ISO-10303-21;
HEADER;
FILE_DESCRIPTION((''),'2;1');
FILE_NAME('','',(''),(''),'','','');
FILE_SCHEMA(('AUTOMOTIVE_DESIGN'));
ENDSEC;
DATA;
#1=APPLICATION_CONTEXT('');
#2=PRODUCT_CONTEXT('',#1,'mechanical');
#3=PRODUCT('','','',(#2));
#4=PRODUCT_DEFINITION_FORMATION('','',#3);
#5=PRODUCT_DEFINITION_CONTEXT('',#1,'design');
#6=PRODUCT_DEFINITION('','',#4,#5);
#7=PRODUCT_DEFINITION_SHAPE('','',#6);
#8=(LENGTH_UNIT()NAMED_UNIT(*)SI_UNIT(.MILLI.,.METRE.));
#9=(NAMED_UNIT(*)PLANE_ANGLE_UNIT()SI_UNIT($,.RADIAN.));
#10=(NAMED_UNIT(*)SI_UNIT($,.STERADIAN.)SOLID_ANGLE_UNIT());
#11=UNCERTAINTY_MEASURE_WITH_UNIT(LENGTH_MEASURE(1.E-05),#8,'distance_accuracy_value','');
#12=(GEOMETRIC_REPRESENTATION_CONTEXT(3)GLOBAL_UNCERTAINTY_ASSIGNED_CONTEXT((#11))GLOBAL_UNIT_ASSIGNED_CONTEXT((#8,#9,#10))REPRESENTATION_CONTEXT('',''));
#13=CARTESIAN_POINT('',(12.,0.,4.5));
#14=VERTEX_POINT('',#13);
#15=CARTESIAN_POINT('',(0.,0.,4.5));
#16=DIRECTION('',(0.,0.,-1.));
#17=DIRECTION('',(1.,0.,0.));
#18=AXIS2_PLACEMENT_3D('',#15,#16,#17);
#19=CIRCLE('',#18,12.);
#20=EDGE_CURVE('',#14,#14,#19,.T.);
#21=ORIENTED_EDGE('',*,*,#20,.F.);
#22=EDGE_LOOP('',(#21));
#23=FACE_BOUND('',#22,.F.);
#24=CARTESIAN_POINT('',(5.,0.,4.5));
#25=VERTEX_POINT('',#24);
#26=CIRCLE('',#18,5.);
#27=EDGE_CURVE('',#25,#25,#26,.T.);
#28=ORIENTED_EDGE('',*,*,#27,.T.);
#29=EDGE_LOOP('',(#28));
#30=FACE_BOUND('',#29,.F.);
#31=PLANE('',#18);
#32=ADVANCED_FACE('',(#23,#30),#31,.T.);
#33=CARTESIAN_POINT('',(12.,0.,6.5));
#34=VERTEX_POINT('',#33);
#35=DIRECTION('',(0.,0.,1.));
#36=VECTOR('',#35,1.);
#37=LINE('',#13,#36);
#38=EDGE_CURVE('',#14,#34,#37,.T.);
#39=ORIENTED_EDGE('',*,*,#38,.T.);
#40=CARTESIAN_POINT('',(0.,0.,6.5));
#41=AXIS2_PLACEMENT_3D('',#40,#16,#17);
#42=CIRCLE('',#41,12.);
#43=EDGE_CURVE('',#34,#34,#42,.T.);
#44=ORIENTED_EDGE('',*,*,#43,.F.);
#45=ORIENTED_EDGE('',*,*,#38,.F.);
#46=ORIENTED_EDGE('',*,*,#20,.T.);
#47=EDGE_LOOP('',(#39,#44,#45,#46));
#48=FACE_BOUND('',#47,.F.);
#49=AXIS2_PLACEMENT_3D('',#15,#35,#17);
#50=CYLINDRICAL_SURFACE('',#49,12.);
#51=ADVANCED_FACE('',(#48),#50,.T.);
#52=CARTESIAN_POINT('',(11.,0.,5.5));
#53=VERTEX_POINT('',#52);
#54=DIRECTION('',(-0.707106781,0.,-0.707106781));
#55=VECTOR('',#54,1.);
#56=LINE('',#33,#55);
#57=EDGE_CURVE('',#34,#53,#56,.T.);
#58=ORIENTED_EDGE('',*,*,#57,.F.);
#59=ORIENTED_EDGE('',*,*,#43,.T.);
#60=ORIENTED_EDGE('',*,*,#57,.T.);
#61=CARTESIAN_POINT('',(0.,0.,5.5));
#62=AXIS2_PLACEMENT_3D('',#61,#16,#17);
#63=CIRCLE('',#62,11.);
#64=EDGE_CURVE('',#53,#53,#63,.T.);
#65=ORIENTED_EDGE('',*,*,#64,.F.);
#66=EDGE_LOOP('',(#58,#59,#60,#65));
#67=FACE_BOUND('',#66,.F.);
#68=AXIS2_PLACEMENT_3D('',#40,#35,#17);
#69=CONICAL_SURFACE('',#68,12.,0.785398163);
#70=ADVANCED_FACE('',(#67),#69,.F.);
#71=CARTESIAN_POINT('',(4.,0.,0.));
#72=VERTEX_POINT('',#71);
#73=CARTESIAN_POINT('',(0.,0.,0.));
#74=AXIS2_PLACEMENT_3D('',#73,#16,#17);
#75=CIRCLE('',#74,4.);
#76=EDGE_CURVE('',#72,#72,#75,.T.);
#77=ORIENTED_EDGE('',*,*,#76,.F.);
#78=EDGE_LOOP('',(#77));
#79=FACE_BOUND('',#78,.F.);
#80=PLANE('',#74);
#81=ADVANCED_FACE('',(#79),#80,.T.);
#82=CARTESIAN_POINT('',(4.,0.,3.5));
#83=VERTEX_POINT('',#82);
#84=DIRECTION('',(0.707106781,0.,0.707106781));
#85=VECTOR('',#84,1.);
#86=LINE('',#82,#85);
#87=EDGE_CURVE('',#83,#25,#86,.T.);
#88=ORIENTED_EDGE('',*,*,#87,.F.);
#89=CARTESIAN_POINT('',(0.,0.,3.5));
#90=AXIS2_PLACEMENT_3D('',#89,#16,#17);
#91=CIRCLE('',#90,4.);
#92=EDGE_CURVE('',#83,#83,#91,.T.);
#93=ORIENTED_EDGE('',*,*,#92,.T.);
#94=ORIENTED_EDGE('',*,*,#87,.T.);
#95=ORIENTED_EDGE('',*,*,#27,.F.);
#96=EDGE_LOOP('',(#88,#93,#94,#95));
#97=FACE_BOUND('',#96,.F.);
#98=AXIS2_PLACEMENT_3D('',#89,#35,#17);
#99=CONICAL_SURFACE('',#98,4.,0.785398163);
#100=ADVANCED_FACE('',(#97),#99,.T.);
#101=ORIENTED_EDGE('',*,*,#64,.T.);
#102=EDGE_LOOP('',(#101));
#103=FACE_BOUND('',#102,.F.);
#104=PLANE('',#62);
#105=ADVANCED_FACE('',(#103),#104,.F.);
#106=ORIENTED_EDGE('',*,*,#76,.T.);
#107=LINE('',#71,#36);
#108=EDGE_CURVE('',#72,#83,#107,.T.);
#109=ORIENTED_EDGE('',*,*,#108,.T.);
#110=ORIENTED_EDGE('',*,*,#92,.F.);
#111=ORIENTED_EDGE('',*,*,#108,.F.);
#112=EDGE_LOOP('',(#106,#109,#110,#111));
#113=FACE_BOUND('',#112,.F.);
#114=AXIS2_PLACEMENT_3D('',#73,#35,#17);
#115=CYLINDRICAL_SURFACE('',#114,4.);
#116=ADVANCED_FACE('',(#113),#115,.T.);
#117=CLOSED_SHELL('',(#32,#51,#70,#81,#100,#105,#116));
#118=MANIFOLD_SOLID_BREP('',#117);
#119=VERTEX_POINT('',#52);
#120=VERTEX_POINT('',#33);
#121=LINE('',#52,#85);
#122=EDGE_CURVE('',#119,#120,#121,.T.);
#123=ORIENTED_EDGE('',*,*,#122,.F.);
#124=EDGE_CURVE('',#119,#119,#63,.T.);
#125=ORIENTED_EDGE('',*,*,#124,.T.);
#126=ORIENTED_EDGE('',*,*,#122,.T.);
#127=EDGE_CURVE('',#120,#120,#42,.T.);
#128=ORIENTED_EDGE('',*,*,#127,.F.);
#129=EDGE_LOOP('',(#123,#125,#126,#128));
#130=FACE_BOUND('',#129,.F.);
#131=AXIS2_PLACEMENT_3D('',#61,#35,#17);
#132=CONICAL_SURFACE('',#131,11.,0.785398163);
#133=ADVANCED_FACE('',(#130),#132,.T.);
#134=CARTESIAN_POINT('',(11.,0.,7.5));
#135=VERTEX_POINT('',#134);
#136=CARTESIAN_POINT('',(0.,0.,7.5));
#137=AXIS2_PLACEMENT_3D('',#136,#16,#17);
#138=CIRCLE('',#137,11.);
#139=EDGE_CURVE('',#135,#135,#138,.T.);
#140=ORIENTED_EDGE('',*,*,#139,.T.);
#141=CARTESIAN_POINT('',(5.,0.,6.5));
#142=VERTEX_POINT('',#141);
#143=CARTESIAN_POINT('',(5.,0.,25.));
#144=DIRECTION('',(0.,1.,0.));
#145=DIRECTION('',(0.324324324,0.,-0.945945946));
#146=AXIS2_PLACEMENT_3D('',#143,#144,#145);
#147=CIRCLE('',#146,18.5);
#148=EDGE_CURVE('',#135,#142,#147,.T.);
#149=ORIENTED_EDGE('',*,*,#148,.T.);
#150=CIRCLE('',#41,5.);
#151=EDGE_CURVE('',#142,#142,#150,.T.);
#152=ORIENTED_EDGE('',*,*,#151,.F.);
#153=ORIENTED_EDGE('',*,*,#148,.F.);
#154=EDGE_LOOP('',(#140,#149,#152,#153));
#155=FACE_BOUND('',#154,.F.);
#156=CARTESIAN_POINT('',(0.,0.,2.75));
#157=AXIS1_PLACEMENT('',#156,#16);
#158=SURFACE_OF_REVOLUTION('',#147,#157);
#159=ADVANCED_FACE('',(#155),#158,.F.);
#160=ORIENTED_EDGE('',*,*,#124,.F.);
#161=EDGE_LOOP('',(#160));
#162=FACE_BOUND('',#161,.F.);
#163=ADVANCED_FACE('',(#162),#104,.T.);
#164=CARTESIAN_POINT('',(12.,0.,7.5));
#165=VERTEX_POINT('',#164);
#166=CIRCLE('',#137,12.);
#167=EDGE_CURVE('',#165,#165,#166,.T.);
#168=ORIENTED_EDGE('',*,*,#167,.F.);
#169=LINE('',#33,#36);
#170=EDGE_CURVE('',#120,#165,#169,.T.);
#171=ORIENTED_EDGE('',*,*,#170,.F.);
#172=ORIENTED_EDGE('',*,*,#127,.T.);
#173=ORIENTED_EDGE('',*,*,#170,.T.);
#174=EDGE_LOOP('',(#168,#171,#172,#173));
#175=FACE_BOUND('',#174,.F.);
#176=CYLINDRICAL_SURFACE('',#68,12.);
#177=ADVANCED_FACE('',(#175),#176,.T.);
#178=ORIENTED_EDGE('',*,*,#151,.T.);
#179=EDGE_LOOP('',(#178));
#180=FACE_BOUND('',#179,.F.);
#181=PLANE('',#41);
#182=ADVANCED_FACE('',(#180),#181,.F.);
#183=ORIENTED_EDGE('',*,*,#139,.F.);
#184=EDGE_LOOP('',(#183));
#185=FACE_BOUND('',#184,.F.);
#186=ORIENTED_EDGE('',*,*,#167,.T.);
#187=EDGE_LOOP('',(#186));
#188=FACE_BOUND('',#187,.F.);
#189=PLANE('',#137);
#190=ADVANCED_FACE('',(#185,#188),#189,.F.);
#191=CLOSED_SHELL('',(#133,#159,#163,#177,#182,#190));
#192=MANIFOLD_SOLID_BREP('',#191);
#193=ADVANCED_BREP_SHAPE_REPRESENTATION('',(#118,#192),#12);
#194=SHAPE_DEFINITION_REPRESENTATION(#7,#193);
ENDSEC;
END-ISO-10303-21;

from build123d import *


# Not quite as in the source:
# - a feature of the source that left no trace in its solid (it failed there, or was rolled back) is left out
# - a feature names something its author has since deleted; it is built from what else it names


with BuildPart() as f1:
    # F0 (on Front) → F1 (revolve)
    with BuildSketch(Plane.XZ):
        Polygon((0, 5.5), (0, 0), (4, 0), (4, 3.5), (5, 4.5), (12, 4.5), (12, 6.5), (11, 5.5), align=None)
    revolve(axis=Axis((0, 0, 2.75), (0, 0, -1)))


with BuildPart() as f2:
    # F0 (on Front) → F2 (revolve)
    with BuildSketch(Plane.XZ):
        with BuildLine():
            Line((0, 6.5), (0, 5.5))
            Line((0, 5.5), (11, 5.5))
            Line((11, 5.5), (12, 6.5))
            Line((12, 6.5), (12, 7.5))
            Line((12, 7.5), (11, 7.5))
            ThreePointArc((11, 7.5), (8.0413812651, 6.7517124091), (5, 6.5))
            Line((5, 6.5), (0, 6.5))
        make_face()
    revolve(axis=Axis((0, 0, 2.75), (0, 0, -1)))


solid = Compound([f1.part, f2.part])
